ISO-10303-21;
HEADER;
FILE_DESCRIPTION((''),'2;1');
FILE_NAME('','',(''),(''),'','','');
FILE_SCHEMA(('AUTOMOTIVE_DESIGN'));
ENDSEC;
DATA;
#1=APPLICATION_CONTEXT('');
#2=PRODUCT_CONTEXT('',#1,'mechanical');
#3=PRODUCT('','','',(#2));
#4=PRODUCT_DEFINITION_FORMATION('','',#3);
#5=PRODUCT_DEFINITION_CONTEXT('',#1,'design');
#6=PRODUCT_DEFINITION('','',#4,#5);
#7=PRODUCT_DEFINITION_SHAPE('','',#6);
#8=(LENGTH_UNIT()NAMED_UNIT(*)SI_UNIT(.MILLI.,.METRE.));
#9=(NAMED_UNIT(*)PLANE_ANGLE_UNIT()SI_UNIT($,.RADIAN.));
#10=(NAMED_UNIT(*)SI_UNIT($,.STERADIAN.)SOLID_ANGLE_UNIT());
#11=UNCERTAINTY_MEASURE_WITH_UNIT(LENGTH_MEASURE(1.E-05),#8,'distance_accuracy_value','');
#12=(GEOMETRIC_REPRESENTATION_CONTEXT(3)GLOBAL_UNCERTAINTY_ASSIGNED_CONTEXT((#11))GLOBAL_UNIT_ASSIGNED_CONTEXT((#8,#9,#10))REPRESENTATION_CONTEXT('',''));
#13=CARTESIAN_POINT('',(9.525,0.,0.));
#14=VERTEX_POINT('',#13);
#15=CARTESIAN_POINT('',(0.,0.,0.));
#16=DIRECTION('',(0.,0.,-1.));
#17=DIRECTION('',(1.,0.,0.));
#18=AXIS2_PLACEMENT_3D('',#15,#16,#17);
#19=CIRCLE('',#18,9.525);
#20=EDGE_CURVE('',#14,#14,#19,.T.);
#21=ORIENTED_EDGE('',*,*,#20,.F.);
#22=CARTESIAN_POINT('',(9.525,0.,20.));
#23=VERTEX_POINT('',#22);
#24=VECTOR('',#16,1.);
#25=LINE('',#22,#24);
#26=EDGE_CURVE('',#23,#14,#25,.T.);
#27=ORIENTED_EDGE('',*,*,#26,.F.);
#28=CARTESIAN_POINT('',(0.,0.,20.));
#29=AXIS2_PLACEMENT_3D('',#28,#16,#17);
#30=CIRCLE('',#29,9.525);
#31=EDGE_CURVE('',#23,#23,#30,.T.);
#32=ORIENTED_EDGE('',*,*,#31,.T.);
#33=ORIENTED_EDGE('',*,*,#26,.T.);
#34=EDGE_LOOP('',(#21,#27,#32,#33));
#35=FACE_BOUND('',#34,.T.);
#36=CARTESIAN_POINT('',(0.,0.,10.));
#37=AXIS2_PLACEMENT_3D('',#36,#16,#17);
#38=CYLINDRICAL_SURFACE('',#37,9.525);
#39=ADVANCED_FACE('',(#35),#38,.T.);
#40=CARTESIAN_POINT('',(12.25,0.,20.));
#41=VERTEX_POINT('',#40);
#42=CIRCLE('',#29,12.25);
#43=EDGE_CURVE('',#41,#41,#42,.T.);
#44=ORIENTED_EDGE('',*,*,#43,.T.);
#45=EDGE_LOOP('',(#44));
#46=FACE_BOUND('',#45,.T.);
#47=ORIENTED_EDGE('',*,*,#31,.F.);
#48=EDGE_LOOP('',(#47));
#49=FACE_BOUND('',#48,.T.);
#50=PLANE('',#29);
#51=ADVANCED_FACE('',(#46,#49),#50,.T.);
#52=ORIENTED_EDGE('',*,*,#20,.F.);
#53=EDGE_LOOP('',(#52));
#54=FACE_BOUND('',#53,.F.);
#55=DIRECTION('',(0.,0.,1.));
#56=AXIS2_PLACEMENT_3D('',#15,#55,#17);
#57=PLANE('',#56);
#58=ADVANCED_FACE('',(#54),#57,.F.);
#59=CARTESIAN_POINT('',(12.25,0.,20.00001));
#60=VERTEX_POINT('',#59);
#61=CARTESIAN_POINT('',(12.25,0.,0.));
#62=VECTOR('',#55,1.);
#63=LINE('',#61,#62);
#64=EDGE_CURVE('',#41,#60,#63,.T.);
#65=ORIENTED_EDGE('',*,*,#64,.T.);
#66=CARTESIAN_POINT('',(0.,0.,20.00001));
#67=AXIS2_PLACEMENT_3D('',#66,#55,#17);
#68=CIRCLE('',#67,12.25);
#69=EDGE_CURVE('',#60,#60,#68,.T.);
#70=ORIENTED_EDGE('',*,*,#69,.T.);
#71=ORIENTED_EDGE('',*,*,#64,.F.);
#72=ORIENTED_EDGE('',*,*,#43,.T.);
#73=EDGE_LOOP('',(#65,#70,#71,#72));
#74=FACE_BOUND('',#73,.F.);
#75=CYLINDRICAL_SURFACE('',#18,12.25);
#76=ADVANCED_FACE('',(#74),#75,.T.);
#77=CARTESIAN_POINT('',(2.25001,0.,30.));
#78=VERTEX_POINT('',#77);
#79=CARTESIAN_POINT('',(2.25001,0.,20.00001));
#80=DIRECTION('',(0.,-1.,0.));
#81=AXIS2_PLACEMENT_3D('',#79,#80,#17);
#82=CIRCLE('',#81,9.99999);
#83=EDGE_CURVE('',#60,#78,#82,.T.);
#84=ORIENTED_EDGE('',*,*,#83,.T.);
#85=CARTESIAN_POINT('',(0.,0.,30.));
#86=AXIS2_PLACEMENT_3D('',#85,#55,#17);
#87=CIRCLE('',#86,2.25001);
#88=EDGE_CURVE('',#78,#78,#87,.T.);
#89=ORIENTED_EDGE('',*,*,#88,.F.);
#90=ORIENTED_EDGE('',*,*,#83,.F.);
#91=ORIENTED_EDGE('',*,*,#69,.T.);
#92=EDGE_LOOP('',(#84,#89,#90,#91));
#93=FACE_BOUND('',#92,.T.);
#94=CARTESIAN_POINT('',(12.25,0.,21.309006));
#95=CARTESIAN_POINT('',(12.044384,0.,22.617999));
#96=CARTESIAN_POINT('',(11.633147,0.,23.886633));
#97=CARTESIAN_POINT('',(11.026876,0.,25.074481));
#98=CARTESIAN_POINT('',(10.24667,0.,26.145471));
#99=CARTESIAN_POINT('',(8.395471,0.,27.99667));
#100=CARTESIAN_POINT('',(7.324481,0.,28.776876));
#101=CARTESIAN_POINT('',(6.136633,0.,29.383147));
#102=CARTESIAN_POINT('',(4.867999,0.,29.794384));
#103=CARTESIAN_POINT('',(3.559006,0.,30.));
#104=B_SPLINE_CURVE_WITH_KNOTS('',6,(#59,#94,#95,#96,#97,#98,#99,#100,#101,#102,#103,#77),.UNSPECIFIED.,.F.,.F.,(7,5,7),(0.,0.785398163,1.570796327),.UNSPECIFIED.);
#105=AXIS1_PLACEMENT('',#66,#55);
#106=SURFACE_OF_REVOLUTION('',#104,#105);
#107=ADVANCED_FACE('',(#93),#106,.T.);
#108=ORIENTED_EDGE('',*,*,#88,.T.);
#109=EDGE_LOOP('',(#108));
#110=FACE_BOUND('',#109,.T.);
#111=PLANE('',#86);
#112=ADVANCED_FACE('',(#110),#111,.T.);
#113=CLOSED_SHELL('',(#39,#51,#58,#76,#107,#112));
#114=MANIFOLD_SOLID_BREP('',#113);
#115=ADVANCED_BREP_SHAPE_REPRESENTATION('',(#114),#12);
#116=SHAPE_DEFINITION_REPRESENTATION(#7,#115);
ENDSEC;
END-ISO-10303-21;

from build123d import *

# Parameters (mm, degrees)
F0_R     = 12.25
F1_DEPTH = 30
F2_R     = 12.25
F2_R_2   = 9.525
F3_DEPTH = 10
F4_DEPTH = 10
F5_R     = 9.99999


# Not quite as in the source:
# - a fillet or chamfer is up to 0.001 mm smaller than in the source, because OpenCascade refuses the exact size


with BuildPart() as f1:
    # F0 (on Top) → F1 (new body)
    with BuildSketch(Plane.XY):
        Circle(F0_R)
    extrude(amount=F1_DEPTH)

    # F2 (on face) → F3 (cut)
    with BuildSketch(Plane(origin=(0, 0, 0), x_dir=(1, 0, 0), z_dir=(0, 0, -1))):
        Circle(F2_R)
        Circle(F2_R_2, mode=Mode.SUBTRACT)
    extrude(amount=-F3_DEPTH, mode=Mode.SUBTRACT)

    # F4 (cut): a face of the model
    f4_faces = [f1.faces().sort_by_distance(p)[0] for p in [
        (-11.9035176772, 0, 10),
    ]]
    extrude(f4_faces, amount=-F4_DEPTH, mode=Mode.SUBTRACT)

    # F5 (radius 10 in the source; OpenCascade refuses exactly that, so slightly less here)
    f5_edges = [f1.edges().sort_by_distance(p)[0] for p in [
        (-12.25, 0, 30),
    ]]
    fillet(f5_edges, radius=F5_R)


solid = f1.part
